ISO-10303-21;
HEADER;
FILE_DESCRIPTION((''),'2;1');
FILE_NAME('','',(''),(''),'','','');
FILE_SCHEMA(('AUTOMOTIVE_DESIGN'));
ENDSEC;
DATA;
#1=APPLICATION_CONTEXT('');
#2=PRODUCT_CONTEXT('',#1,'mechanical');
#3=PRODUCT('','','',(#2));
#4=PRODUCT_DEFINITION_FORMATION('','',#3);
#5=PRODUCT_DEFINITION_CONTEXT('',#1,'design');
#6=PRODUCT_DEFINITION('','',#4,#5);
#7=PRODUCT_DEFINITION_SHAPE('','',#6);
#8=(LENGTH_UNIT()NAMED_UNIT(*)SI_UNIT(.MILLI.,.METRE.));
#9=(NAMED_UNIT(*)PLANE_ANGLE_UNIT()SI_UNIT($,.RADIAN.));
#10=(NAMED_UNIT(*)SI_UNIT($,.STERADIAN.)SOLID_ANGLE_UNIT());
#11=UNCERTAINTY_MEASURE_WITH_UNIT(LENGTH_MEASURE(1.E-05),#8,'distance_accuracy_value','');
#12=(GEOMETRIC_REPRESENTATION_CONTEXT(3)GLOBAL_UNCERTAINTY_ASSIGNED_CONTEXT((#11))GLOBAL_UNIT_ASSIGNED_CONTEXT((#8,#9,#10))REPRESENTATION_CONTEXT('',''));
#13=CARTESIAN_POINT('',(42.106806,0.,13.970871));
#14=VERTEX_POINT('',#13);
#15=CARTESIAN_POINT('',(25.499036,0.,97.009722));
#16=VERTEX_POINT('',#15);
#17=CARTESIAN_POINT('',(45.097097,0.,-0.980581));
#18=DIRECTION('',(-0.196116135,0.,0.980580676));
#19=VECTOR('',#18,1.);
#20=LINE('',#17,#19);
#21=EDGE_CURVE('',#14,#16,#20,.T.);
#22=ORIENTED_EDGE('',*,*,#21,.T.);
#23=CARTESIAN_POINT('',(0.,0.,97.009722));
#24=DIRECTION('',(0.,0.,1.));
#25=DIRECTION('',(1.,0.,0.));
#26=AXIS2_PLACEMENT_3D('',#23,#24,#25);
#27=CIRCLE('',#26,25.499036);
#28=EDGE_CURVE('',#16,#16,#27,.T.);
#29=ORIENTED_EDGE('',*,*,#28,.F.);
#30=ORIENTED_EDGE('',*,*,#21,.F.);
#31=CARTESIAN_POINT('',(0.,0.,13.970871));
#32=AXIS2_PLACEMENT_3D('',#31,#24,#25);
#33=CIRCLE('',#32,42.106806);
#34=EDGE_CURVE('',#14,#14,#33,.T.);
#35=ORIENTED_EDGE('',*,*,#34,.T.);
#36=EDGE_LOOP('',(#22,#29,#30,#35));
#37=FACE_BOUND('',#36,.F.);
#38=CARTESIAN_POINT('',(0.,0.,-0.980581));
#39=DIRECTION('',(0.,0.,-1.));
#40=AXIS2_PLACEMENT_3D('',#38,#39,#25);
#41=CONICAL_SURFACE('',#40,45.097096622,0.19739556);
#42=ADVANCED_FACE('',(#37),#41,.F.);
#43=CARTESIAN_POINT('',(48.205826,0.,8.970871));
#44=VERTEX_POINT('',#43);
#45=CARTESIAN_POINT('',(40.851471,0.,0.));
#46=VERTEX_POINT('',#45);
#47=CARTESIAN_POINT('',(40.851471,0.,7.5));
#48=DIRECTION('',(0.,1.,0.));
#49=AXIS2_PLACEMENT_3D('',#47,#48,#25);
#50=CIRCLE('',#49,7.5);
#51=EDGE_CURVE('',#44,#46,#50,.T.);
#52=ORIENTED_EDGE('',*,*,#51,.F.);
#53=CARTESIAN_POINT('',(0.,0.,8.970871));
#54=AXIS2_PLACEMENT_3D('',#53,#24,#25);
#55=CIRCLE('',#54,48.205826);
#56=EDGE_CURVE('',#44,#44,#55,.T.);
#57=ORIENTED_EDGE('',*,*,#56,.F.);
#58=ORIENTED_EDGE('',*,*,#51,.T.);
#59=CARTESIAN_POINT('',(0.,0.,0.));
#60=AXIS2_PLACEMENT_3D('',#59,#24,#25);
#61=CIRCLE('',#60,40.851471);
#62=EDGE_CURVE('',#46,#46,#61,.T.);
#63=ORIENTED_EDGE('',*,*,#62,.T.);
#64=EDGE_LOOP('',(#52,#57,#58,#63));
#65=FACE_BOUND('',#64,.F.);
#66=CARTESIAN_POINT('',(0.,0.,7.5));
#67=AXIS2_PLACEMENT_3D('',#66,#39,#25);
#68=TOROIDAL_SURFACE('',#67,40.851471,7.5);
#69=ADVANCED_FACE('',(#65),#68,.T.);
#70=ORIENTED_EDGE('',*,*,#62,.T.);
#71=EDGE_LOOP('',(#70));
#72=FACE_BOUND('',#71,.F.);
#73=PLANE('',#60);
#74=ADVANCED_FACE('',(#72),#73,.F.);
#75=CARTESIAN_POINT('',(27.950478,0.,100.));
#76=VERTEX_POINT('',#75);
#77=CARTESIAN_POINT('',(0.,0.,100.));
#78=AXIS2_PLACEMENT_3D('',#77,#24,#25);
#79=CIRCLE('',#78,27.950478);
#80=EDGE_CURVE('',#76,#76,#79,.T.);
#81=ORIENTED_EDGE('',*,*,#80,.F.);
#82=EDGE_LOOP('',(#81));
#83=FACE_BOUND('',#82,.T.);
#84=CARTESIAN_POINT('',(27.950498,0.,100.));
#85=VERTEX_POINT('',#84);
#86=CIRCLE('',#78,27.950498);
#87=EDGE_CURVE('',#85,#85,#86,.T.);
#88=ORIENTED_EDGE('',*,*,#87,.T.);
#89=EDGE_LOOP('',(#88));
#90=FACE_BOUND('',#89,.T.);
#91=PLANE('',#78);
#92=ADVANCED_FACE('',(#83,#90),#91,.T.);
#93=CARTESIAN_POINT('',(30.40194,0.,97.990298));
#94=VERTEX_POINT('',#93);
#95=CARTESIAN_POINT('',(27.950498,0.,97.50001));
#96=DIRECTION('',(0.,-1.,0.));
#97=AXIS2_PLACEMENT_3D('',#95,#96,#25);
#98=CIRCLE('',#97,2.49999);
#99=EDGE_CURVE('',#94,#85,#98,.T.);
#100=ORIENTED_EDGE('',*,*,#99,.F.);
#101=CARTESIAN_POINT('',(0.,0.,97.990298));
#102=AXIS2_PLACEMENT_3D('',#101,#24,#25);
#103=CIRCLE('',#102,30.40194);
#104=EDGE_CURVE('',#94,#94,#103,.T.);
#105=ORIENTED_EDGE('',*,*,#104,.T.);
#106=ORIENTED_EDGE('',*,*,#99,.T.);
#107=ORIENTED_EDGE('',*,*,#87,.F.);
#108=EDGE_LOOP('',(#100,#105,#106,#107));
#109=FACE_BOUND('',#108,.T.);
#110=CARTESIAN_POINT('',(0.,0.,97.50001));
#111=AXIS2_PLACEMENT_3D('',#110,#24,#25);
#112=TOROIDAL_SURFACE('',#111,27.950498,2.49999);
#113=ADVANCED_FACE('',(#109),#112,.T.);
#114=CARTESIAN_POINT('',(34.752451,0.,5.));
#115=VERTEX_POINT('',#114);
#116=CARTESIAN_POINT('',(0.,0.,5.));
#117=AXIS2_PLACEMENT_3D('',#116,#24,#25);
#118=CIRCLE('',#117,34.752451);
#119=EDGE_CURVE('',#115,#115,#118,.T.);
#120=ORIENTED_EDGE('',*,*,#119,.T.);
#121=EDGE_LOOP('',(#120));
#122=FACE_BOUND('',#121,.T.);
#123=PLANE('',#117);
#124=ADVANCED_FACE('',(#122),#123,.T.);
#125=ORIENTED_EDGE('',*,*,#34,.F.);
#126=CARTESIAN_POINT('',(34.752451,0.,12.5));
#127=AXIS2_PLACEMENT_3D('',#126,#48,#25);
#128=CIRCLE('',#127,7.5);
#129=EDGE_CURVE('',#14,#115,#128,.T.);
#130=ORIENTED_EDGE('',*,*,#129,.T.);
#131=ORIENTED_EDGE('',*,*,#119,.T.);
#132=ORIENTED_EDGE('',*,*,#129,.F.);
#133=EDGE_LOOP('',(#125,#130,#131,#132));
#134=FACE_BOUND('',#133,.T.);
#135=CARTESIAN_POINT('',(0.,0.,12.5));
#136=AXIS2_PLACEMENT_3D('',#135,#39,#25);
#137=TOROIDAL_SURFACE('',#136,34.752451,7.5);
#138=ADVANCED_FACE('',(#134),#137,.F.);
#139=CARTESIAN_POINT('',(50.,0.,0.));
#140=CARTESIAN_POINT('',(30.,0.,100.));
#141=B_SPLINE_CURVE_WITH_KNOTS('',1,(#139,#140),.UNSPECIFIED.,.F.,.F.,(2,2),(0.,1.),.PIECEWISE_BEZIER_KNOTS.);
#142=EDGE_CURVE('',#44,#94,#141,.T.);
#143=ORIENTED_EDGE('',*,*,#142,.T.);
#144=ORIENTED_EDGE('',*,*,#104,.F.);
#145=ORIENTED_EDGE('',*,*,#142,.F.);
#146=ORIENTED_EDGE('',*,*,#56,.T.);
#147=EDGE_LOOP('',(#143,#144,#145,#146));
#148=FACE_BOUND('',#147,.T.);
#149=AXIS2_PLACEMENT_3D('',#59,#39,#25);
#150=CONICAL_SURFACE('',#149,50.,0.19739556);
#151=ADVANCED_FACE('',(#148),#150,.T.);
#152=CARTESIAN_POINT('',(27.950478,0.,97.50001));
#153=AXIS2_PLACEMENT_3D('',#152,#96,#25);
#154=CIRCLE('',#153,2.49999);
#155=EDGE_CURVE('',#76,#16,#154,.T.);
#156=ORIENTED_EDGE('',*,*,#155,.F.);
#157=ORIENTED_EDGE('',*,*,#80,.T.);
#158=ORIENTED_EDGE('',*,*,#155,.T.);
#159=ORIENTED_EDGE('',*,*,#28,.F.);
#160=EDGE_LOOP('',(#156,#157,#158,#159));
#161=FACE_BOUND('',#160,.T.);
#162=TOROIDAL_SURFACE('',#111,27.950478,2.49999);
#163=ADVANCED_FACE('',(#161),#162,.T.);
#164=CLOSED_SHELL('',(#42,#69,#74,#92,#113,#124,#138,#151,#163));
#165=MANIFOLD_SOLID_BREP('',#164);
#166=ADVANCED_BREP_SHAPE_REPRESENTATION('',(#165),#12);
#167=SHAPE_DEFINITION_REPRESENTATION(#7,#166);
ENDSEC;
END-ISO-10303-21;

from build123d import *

# Parameters (mm, degrees)
F0_R = 50
F2_R = 30
F4_T = -5
F5_R = 2.49999
F6_R = 7.5


# Not quite as in the source:
# - a fillet or chamfer is up to 0.001 mm smaller than in the source, because OpenCascade refuses the exact size


with BuildPart() as f3:
    # F0 (on Top) → F3 section 0
    with BuildSketch(Plane.XY):
        Circle(F0_R)
    # F2 (on offset) → F3 section 1
    with BuildSketch(Plane.XY.offset(100)):
        Circle(F2_R)
    loft()

    # F4
    f4_openings = [f3.faces().sort_by_distance(p)[0] for p in [
        (0, 0, 100),
    ]]
    offset(amount=F4_T, openings=f4_openings, kind=Kind.INTERSECTION)

    # F5 (radius 2.5 in the source; OpenCascade refuses exactly that, so slightly less here)
    f5_edges = [f3.edges().sort_by_distance(p)[0] for p in [
        (-30, 0, 100),
        (-24.90098, 0, 100),
    ]]
    fillet(f5_edges, radius=F5_R)

    # F6
    f6_edges = [f3.edges().sort_by_distance(p)[0] for p in [
        (-50, 0, 0),
        (-43.90098, 0, 5),
    ]]
    fillet(f6_edges, radius=F6_R)


solid = f3.part
